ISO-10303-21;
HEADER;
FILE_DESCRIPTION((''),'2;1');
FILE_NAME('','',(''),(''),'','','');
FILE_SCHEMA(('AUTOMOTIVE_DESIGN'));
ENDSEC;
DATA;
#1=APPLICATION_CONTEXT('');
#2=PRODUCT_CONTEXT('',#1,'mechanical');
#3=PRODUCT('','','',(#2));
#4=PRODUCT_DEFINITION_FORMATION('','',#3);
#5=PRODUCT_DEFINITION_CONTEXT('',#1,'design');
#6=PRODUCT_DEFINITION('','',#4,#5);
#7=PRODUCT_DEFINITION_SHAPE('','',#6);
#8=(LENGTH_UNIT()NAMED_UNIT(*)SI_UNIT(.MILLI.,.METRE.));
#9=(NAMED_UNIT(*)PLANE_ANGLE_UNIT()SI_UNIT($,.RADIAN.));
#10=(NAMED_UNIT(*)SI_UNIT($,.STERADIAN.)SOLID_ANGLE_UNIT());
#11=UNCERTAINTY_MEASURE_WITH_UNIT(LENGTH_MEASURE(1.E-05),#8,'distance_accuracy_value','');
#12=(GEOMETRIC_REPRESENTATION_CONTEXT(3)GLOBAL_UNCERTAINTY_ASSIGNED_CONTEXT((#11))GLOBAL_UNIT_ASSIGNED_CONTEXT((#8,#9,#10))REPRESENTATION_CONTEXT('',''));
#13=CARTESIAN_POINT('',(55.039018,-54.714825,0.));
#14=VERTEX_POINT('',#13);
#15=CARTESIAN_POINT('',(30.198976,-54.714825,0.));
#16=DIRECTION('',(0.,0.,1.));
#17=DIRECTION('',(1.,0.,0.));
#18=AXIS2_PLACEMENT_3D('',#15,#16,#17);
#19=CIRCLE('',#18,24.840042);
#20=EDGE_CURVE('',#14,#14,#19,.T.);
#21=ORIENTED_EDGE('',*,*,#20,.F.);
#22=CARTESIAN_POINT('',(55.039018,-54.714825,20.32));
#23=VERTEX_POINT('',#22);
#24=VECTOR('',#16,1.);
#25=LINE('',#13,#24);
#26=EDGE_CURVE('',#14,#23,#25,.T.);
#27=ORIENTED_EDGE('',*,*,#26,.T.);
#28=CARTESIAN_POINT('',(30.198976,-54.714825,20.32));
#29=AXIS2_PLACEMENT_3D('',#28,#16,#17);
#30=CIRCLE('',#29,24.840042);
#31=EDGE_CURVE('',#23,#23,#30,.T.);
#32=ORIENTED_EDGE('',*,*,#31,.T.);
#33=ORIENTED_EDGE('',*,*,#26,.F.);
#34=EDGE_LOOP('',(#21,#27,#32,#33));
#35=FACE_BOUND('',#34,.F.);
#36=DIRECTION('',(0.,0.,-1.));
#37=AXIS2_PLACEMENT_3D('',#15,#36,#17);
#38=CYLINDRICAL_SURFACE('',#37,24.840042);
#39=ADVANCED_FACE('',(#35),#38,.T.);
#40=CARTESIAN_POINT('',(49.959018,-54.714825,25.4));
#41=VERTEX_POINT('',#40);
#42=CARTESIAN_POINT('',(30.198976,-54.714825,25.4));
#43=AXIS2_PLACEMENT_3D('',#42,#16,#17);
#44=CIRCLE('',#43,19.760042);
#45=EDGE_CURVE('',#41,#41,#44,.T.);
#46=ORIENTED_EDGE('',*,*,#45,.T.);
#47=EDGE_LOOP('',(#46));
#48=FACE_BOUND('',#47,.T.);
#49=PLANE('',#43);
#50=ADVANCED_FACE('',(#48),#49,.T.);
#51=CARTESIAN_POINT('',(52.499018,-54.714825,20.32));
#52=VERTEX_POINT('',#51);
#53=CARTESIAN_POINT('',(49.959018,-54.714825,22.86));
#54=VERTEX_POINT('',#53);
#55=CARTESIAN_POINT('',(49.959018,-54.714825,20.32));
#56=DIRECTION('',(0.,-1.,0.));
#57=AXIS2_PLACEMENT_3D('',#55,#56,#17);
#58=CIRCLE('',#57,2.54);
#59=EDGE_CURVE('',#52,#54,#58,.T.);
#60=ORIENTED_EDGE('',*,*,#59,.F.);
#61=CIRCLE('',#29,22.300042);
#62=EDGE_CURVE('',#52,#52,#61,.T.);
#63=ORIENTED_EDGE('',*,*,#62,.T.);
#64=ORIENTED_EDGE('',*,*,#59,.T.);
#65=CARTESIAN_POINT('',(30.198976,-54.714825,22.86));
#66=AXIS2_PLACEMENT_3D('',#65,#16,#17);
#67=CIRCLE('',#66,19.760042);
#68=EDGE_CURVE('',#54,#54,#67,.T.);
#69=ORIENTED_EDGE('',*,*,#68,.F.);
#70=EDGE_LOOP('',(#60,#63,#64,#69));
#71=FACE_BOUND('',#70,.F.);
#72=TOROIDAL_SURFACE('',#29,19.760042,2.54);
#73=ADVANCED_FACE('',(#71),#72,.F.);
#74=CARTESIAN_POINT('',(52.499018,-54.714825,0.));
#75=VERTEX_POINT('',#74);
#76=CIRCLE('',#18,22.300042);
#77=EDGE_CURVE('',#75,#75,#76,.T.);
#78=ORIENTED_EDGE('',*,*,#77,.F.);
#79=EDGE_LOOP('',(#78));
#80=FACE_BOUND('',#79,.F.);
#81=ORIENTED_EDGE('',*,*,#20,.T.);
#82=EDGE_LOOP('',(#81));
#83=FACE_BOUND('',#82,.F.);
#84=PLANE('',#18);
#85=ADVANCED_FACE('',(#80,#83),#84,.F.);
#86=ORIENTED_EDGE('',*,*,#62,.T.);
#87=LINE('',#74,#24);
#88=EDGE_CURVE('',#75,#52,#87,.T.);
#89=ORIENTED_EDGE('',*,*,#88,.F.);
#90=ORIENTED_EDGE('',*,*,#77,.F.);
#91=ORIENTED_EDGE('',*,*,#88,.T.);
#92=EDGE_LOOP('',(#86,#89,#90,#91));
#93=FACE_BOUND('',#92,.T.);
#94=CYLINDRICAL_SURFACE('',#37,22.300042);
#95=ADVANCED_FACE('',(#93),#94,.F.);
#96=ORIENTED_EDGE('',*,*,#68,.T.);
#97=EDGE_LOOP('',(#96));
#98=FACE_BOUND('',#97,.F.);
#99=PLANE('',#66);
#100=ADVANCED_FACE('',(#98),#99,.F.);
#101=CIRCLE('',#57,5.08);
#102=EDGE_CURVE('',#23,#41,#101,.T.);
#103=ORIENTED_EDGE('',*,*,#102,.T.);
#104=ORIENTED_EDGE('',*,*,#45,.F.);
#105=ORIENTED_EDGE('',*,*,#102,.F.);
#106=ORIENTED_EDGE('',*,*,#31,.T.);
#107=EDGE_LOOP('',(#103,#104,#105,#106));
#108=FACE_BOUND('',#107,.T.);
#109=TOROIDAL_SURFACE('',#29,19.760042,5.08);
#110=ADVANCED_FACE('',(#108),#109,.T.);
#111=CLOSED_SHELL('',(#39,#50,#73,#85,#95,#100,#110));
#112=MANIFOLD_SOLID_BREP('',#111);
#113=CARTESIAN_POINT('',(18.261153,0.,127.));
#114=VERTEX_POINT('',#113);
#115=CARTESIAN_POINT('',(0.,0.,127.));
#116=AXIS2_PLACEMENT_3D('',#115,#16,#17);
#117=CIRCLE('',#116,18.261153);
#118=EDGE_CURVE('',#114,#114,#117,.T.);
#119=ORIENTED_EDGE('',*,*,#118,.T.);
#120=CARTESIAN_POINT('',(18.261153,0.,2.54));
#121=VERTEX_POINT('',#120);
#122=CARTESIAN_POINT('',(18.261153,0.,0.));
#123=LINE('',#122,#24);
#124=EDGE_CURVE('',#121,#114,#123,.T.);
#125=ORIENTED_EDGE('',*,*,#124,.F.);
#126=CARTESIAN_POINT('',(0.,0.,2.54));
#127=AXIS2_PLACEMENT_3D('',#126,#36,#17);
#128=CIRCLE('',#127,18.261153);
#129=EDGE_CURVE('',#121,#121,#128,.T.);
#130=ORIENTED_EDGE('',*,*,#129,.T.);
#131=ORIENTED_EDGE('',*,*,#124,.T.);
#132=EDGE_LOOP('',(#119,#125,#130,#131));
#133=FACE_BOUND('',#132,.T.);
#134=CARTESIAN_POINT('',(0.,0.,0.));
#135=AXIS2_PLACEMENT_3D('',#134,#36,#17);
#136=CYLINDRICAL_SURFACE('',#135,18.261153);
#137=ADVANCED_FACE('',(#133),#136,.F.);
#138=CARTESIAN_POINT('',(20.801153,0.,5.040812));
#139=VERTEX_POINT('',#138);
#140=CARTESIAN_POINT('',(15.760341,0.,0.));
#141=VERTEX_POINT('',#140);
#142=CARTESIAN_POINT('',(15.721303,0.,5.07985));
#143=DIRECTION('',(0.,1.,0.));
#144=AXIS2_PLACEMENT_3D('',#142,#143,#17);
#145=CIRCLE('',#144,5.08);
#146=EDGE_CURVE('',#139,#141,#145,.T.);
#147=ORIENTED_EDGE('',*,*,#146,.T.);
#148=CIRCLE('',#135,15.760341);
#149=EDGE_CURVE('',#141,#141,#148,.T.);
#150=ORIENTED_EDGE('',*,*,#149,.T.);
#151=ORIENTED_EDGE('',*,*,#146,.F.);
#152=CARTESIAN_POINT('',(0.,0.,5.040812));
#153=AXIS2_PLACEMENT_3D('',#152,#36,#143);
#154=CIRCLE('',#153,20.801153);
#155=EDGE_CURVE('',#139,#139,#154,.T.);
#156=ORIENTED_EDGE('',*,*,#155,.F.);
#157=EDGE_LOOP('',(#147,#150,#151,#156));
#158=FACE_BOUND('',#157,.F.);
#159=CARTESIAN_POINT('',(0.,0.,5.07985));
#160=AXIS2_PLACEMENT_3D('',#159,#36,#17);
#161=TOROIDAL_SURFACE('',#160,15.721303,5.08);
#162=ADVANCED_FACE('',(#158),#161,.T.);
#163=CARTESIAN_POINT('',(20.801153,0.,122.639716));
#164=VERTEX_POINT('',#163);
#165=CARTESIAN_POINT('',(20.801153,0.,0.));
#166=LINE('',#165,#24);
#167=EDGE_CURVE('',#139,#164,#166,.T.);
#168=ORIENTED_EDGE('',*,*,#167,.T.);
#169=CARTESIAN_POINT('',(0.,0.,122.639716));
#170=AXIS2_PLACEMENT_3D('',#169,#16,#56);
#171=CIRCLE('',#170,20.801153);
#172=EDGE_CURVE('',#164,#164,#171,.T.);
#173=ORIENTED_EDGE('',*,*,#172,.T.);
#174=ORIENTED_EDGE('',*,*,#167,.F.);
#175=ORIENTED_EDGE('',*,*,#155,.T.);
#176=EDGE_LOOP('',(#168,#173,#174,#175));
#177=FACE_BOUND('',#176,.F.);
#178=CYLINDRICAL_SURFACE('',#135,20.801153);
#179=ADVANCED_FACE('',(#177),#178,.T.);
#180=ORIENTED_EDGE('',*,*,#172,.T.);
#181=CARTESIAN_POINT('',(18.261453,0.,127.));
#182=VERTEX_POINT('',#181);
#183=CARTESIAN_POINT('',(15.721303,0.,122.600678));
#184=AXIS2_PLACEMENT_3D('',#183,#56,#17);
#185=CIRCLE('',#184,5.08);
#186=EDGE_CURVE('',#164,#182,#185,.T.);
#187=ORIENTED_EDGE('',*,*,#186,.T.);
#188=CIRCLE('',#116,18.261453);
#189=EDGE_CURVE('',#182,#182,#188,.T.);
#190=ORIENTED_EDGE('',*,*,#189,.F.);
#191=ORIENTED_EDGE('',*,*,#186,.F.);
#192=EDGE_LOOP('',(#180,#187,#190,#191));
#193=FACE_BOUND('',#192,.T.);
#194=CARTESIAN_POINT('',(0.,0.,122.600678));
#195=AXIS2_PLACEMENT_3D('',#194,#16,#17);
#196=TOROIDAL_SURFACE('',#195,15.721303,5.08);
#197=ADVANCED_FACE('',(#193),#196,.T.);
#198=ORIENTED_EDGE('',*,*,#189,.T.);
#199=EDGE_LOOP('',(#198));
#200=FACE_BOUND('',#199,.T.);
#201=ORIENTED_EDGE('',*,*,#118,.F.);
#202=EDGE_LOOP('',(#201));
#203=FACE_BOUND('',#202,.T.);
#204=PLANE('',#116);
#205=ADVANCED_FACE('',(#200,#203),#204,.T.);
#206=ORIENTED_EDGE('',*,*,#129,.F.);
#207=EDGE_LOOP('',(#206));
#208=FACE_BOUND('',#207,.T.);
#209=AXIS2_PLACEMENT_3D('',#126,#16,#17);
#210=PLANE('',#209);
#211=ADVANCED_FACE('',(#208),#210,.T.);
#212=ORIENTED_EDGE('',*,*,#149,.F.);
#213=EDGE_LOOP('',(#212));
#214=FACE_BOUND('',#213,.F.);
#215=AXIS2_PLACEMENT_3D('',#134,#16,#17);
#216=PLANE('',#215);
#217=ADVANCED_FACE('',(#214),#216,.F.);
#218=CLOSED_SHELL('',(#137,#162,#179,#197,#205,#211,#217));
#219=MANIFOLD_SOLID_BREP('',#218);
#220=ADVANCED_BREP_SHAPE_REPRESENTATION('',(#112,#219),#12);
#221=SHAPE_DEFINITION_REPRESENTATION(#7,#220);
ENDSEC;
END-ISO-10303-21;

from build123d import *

# Parameters (mm, degrees)
F0_R     = 20.8011529173
F1_DEPTH = 127
F2_T     = -2.54
F4_R     = 24.8400420573
F5_DEPTH = 25.4
F6_R     = 5.08
F7_T     = -2.54


# Not quite as in the source:
# - a fillet or chamfer that OpenCascade refuses, or shapes differently, is made with other operations: its cross-section is extruded or revolved along the edge and cut away or added


with BuildPart() as f1:
    # F0 (on Top) → F1 (new body)
    with BuildSketch(Plane.XY):
        Circle(F0_R)
    extrude(amount=F1_DEPTH)

    # F2
    f2_openings = [f1.faces().sort_by_distance(p)[0] for p in [
        (0, 0, 127),
    ]]
    offset(amount=F2_T, openings=f2_openings)

    # F3: fillet of radius 5.08 on 3 edges, made by hand

    # F3_s1 → F3_t2 (revolve, cut)
    with BuildSketch(Plane.XZ):
        with BuildLine():
            ThreePointArc((20.8013029173, 5.07985), (19.3134053657, 1.4877475516), (15.7213029173, -0.00015))
            Line((15.7213029173, -0.00015), (15.7213029173, -0.10175))
            ThreePointArc((15.7213029173, -0.10175), (18.2612279173, -0.1016), (20.8011529173, -0.1016))
            Line((20.8011529173, -0.1016), (20.9027529173, 0))
            ThreePointArc((20.9027529173, 0), (20.9027529173, 2.539925), (20.9029029173, 5.07985))
            Line((20.9029029173, 5.07985), (20.8013029173, 5.07985))
        make_face()
    revolve(axis=Axis((0, 0, 0), (0, 0, 1)), mode=Mode.SUBTRACT)

    # F3_s3 → F3_t4 (revolve, cut)
    with BuildSketch(Plane.XZ):
        with BuildLine():
            ThreePointArc((20.8013029173, 122.6006775522), (20.1206903172, 125.140715053), (18.2612279151, 127.0001299051))
            Line((18.2612279151, 127.0001299051), (18.312026415, 127.0881189521))
            ThreePointArc((18.312026415, 127.0881189521), (19.5311904162, 127.1016), (20.8011529173, 127.1016))
            Line((20.8011529173, 127.1016), (20.9027529173, 127))
            ThreePointArc((20.9027529173, 127), (20.9027529173, 124.8003387761), (20.9029029173, 122.6006775522))
            Line((20.9029029173, 122.6006775522), (20.8013029173, 122.6006775522))
        make_face()
    revolve(axis=Axis((0, 0, 127), (0, 0, 1)), mode=Mode.SUBTRACT)


with BuildPart() as f5:
    # F4 (on Top) → F5 (new body)
    with BuildSketch(Plane.XY):
        with Locations((30.1989763975, -54.7148250043)):
            Circle(F4_R)
    extrude(amount=F5_DEPTH)

    # F6
    f6_edges = [f5.edges().sort_by_distance(p)[0] for p in [
        (5.358934, -54.714825, 25.4),
    ]]
    fillet(f6_edges, radius=F6_R)

    # F7
    f7_openings = [f5.faces().sort_by_distance(p)[0] for p in [
        (30.198976, -54.714825, 0),
    ]]
    offset(amount=F7_T, openings=f7_openings)


solid = Compound([f1.part, f5.part])
